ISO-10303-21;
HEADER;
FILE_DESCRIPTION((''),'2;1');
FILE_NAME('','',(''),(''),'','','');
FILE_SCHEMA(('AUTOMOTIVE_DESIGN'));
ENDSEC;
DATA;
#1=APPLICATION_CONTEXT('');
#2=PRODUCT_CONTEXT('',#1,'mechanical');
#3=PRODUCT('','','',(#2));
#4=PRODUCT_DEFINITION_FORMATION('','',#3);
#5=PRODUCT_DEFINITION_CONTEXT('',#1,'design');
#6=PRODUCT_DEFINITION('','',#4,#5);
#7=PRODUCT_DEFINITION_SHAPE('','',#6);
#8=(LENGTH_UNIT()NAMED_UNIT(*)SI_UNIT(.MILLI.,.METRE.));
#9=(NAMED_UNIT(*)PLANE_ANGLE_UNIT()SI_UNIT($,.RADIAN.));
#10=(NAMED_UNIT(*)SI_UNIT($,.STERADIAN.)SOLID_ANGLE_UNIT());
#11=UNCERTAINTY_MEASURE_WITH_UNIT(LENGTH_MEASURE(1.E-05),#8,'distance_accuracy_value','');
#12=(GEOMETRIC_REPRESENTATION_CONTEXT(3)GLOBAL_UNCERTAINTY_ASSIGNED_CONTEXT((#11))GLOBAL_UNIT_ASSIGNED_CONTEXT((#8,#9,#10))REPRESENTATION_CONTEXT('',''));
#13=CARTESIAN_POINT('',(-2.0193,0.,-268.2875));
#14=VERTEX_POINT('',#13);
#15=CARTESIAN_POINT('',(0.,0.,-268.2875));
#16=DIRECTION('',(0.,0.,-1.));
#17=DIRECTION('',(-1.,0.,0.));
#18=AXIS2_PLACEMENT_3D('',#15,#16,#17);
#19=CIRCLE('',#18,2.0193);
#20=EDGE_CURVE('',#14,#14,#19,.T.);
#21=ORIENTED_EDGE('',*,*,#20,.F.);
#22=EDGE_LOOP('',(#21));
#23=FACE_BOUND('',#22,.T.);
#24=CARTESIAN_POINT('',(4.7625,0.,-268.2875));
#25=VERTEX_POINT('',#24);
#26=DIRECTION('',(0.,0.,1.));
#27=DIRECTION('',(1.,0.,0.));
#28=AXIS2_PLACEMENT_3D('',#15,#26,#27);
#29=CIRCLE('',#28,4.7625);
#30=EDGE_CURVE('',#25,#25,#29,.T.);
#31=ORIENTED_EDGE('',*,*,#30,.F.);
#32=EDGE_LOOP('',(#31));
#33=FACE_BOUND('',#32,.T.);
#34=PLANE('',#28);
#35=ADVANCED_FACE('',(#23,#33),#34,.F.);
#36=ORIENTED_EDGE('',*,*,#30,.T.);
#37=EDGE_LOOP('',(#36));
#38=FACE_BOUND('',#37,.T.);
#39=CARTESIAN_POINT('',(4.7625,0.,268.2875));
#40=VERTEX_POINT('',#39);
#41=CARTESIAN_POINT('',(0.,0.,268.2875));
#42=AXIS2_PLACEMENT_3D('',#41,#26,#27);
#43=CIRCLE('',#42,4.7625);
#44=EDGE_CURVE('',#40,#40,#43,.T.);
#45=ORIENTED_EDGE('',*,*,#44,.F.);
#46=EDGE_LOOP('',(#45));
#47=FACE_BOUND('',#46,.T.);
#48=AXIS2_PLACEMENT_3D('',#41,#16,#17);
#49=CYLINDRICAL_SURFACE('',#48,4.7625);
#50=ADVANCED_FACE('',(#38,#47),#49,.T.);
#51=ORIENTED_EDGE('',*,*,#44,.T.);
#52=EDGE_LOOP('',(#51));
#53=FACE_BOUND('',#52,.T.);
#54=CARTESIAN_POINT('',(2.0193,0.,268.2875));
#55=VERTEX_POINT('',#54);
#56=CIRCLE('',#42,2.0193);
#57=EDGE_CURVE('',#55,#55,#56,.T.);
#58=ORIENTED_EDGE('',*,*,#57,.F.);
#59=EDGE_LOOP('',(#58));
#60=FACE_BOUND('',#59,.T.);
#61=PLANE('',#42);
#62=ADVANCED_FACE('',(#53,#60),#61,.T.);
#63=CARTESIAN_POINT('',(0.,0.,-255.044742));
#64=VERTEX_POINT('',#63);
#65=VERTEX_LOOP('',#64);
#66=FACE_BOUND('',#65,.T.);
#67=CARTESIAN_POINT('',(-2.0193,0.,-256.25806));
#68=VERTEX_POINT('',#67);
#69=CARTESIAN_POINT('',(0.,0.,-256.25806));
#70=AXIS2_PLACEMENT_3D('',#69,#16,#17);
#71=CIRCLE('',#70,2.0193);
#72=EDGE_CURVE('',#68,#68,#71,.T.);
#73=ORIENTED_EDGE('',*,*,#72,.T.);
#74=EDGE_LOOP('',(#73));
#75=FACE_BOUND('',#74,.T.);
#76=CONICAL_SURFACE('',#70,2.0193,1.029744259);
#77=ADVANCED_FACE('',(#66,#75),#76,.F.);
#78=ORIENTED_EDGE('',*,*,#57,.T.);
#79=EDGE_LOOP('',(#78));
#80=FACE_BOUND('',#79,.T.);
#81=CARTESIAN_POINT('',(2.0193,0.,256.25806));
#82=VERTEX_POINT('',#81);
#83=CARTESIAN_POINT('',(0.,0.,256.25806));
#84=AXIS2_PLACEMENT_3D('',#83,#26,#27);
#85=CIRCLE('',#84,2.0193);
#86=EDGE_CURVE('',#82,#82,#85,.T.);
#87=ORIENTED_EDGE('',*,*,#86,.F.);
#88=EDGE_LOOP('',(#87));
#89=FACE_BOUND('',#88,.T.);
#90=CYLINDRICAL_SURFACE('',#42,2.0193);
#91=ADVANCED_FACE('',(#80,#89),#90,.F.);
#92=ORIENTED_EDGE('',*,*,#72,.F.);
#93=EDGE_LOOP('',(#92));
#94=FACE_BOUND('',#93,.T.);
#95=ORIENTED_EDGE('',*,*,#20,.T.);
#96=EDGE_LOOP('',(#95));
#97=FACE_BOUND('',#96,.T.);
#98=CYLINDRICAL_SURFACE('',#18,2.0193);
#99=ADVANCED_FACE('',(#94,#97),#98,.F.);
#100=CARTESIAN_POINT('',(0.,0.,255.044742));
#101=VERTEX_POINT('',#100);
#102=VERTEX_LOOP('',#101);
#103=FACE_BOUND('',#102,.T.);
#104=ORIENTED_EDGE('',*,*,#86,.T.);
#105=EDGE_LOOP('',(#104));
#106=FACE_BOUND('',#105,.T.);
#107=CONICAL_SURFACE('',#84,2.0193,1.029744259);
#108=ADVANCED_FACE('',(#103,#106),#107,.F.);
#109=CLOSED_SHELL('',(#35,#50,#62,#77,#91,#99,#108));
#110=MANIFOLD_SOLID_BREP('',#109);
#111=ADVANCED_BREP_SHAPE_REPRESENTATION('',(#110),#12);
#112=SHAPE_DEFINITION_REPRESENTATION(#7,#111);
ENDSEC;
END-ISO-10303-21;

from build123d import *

# Parameters (mm, degrees)
SKETCH1_R           = 4.7625
BOSS_EXTRUDE1_DEPTH = 268.2875


# Read off the part's stored shape, not the designer's step: #10-32 Tapped Hole1
with BuildPart() as part:
    # Sketch1 → Boss-Extrude1 (new, symmetric)
    with BuildSketch(Plane.XY):
        Circle(SKETCH1_R)
    extrude(amount=BOSS_EXTRUDE1_DEPTH, both=True)

    # #10-32 Tapped Hole1 outline → #10-32 Tapped Hole1 (revolve, cut)
    with BuildSketch(Plane.XZ):
        Polygon((2.0193, -256.25806), (0, -255.044742152), (0, -268.2875), (2.0193, -268.2875), align=None)
        Polygon((0, 268.2875), (0, 255.044742152), (2.0193, 256.25806), (2.0193, 268.2875), align=None)
    revolve(axis=Axis((0, 0, 0), (0, 0, 1)), mode=Mode.SUBTRACT)


solid = part.part
